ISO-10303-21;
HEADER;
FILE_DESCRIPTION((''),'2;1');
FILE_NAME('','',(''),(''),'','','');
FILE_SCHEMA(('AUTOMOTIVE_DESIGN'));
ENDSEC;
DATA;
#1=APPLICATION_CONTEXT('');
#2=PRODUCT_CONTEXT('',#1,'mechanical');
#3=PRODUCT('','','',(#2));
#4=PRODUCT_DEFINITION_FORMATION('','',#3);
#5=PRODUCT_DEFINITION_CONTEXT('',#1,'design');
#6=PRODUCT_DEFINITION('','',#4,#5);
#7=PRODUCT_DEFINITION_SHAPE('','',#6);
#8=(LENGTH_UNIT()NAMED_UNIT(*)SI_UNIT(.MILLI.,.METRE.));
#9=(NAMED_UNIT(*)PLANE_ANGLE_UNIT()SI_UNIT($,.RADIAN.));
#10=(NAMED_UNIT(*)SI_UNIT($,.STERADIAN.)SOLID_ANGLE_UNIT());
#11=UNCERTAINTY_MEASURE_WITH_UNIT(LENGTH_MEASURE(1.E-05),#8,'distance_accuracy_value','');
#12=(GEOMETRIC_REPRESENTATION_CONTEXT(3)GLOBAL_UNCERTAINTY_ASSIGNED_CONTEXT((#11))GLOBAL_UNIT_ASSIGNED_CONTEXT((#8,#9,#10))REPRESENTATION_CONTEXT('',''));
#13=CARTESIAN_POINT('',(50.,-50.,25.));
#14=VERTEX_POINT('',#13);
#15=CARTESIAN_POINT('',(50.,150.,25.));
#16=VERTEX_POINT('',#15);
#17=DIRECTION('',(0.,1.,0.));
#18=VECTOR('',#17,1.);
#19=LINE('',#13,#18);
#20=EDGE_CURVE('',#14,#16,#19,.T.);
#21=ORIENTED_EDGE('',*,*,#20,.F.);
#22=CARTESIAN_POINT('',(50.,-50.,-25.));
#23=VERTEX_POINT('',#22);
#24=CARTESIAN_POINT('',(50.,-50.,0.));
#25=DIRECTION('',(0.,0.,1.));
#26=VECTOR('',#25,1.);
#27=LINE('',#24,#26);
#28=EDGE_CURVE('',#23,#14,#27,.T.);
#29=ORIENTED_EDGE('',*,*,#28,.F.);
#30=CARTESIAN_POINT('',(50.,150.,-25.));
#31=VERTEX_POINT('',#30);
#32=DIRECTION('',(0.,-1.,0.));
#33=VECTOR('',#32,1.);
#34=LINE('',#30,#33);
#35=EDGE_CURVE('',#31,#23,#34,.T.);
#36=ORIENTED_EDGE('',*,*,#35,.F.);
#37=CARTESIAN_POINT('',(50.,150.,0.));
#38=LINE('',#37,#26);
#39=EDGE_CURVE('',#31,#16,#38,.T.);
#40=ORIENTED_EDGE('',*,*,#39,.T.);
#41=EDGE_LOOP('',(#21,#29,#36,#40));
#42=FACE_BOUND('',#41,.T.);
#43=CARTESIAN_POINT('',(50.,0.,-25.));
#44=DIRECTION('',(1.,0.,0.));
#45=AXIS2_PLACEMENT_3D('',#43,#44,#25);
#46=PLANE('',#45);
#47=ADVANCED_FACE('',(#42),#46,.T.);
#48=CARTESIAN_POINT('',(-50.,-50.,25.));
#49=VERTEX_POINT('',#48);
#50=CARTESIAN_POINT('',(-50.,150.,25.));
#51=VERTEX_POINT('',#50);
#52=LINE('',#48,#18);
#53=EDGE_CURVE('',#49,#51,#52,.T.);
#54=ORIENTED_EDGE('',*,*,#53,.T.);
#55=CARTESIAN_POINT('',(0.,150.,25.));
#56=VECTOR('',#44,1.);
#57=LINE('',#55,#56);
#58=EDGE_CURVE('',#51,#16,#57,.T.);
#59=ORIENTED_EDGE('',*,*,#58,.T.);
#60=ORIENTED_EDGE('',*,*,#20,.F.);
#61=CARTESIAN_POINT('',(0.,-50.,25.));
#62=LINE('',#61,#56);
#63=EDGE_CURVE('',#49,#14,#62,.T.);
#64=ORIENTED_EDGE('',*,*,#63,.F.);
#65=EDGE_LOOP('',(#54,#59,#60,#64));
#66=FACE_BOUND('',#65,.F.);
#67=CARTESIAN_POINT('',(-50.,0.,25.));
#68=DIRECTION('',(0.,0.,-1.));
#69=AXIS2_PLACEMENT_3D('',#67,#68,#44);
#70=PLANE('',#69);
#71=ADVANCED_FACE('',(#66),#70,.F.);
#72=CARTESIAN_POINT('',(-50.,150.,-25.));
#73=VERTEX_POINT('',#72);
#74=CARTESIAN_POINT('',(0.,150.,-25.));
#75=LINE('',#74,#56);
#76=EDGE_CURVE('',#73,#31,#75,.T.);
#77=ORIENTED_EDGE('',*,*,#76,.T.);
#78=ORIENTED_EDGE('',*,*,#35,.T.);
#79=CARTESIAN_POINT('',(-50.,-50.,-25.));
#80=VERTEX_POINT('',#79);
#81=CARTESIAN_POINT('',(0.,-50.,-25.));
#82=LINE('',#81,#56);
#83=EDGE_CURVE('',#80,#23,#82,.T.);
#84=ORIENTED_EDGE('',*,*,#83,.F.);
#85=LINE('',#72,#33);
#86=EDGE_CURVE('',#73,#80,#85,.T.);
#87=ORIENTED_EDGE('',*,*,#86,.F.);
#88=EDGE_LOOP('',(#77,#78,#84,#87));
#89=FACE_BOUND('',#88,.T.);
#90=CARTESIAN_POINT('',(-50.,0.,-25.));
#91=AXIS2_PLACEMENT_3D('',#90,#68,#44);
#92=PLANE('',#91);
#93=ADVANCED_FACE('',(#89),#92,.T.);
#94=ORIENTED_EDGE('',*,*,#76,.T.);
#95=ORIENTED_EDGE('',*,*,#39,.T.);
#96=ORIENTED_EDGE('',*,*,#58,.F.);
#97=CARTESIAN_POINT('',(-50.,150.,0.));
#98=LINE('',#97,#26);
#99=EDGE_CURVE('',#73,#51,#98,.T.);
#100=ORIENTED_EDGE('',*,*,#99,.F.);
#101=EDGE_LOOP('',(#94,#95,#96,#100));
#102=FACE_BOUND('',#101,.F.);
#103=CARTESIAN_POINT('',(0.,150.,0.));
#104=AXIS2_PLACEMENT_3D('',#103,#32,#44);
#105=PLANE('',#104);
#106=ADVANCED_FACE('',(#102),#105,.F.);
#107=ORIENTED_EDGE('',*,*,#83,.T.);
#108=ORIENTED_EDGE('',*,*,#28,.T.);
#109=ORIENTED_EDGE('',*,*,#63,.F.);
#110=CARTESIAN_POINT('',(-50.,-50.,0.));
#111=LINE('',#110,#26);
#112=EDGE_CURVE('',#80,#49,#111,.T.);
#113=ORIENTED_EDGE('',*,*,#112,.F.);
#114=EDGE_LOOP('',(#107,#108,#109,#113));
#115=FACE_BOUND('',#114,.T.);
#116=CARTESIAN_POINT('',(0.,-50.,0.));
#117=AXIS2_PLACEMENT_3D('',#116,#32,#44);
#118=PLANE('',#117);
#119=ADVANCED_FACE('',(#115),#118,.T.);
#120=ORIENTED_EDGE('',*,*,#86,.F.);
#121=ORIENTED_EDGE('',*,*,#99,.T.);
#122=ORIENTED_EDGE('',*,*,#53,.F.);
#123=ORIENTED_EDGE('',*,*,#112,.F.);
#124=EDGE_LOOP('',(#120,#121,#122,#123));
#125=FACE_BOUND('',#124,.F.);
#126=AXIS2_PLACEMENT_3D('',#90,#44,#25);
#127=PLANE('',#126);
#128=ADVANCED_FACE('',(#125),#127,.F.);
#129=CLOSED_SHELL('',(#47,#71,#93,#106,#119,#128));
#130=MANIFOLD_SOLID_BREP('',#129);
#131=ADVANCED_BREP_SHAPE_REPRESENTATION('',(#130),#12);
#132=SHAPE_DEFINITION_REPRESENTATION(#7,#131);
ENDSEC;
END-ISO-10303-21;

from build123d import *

# Parameters (mm, degrees)
F0_W          = 100
F0_H          = 50
F1_DEPTH      = 50
F1_DEPTH_BACK = 150


# Not quite as in the source:
# - the program builds the solid bodies; features that only make, move or delete a surface that nothing else refers to are left out


with BuildPart() as f1:
    # F0 (on Front) → F1 (new body, two sides)
    with BuildSketch(Plane.XZ) as f1_sk:
        Rectangle(F0_W, F0_H)
    extrude(amount=F1_DEPTH)
    extrude(f1_sk.sketch, amount=-F1_DEPTH_BACK)


solid = f1.part
